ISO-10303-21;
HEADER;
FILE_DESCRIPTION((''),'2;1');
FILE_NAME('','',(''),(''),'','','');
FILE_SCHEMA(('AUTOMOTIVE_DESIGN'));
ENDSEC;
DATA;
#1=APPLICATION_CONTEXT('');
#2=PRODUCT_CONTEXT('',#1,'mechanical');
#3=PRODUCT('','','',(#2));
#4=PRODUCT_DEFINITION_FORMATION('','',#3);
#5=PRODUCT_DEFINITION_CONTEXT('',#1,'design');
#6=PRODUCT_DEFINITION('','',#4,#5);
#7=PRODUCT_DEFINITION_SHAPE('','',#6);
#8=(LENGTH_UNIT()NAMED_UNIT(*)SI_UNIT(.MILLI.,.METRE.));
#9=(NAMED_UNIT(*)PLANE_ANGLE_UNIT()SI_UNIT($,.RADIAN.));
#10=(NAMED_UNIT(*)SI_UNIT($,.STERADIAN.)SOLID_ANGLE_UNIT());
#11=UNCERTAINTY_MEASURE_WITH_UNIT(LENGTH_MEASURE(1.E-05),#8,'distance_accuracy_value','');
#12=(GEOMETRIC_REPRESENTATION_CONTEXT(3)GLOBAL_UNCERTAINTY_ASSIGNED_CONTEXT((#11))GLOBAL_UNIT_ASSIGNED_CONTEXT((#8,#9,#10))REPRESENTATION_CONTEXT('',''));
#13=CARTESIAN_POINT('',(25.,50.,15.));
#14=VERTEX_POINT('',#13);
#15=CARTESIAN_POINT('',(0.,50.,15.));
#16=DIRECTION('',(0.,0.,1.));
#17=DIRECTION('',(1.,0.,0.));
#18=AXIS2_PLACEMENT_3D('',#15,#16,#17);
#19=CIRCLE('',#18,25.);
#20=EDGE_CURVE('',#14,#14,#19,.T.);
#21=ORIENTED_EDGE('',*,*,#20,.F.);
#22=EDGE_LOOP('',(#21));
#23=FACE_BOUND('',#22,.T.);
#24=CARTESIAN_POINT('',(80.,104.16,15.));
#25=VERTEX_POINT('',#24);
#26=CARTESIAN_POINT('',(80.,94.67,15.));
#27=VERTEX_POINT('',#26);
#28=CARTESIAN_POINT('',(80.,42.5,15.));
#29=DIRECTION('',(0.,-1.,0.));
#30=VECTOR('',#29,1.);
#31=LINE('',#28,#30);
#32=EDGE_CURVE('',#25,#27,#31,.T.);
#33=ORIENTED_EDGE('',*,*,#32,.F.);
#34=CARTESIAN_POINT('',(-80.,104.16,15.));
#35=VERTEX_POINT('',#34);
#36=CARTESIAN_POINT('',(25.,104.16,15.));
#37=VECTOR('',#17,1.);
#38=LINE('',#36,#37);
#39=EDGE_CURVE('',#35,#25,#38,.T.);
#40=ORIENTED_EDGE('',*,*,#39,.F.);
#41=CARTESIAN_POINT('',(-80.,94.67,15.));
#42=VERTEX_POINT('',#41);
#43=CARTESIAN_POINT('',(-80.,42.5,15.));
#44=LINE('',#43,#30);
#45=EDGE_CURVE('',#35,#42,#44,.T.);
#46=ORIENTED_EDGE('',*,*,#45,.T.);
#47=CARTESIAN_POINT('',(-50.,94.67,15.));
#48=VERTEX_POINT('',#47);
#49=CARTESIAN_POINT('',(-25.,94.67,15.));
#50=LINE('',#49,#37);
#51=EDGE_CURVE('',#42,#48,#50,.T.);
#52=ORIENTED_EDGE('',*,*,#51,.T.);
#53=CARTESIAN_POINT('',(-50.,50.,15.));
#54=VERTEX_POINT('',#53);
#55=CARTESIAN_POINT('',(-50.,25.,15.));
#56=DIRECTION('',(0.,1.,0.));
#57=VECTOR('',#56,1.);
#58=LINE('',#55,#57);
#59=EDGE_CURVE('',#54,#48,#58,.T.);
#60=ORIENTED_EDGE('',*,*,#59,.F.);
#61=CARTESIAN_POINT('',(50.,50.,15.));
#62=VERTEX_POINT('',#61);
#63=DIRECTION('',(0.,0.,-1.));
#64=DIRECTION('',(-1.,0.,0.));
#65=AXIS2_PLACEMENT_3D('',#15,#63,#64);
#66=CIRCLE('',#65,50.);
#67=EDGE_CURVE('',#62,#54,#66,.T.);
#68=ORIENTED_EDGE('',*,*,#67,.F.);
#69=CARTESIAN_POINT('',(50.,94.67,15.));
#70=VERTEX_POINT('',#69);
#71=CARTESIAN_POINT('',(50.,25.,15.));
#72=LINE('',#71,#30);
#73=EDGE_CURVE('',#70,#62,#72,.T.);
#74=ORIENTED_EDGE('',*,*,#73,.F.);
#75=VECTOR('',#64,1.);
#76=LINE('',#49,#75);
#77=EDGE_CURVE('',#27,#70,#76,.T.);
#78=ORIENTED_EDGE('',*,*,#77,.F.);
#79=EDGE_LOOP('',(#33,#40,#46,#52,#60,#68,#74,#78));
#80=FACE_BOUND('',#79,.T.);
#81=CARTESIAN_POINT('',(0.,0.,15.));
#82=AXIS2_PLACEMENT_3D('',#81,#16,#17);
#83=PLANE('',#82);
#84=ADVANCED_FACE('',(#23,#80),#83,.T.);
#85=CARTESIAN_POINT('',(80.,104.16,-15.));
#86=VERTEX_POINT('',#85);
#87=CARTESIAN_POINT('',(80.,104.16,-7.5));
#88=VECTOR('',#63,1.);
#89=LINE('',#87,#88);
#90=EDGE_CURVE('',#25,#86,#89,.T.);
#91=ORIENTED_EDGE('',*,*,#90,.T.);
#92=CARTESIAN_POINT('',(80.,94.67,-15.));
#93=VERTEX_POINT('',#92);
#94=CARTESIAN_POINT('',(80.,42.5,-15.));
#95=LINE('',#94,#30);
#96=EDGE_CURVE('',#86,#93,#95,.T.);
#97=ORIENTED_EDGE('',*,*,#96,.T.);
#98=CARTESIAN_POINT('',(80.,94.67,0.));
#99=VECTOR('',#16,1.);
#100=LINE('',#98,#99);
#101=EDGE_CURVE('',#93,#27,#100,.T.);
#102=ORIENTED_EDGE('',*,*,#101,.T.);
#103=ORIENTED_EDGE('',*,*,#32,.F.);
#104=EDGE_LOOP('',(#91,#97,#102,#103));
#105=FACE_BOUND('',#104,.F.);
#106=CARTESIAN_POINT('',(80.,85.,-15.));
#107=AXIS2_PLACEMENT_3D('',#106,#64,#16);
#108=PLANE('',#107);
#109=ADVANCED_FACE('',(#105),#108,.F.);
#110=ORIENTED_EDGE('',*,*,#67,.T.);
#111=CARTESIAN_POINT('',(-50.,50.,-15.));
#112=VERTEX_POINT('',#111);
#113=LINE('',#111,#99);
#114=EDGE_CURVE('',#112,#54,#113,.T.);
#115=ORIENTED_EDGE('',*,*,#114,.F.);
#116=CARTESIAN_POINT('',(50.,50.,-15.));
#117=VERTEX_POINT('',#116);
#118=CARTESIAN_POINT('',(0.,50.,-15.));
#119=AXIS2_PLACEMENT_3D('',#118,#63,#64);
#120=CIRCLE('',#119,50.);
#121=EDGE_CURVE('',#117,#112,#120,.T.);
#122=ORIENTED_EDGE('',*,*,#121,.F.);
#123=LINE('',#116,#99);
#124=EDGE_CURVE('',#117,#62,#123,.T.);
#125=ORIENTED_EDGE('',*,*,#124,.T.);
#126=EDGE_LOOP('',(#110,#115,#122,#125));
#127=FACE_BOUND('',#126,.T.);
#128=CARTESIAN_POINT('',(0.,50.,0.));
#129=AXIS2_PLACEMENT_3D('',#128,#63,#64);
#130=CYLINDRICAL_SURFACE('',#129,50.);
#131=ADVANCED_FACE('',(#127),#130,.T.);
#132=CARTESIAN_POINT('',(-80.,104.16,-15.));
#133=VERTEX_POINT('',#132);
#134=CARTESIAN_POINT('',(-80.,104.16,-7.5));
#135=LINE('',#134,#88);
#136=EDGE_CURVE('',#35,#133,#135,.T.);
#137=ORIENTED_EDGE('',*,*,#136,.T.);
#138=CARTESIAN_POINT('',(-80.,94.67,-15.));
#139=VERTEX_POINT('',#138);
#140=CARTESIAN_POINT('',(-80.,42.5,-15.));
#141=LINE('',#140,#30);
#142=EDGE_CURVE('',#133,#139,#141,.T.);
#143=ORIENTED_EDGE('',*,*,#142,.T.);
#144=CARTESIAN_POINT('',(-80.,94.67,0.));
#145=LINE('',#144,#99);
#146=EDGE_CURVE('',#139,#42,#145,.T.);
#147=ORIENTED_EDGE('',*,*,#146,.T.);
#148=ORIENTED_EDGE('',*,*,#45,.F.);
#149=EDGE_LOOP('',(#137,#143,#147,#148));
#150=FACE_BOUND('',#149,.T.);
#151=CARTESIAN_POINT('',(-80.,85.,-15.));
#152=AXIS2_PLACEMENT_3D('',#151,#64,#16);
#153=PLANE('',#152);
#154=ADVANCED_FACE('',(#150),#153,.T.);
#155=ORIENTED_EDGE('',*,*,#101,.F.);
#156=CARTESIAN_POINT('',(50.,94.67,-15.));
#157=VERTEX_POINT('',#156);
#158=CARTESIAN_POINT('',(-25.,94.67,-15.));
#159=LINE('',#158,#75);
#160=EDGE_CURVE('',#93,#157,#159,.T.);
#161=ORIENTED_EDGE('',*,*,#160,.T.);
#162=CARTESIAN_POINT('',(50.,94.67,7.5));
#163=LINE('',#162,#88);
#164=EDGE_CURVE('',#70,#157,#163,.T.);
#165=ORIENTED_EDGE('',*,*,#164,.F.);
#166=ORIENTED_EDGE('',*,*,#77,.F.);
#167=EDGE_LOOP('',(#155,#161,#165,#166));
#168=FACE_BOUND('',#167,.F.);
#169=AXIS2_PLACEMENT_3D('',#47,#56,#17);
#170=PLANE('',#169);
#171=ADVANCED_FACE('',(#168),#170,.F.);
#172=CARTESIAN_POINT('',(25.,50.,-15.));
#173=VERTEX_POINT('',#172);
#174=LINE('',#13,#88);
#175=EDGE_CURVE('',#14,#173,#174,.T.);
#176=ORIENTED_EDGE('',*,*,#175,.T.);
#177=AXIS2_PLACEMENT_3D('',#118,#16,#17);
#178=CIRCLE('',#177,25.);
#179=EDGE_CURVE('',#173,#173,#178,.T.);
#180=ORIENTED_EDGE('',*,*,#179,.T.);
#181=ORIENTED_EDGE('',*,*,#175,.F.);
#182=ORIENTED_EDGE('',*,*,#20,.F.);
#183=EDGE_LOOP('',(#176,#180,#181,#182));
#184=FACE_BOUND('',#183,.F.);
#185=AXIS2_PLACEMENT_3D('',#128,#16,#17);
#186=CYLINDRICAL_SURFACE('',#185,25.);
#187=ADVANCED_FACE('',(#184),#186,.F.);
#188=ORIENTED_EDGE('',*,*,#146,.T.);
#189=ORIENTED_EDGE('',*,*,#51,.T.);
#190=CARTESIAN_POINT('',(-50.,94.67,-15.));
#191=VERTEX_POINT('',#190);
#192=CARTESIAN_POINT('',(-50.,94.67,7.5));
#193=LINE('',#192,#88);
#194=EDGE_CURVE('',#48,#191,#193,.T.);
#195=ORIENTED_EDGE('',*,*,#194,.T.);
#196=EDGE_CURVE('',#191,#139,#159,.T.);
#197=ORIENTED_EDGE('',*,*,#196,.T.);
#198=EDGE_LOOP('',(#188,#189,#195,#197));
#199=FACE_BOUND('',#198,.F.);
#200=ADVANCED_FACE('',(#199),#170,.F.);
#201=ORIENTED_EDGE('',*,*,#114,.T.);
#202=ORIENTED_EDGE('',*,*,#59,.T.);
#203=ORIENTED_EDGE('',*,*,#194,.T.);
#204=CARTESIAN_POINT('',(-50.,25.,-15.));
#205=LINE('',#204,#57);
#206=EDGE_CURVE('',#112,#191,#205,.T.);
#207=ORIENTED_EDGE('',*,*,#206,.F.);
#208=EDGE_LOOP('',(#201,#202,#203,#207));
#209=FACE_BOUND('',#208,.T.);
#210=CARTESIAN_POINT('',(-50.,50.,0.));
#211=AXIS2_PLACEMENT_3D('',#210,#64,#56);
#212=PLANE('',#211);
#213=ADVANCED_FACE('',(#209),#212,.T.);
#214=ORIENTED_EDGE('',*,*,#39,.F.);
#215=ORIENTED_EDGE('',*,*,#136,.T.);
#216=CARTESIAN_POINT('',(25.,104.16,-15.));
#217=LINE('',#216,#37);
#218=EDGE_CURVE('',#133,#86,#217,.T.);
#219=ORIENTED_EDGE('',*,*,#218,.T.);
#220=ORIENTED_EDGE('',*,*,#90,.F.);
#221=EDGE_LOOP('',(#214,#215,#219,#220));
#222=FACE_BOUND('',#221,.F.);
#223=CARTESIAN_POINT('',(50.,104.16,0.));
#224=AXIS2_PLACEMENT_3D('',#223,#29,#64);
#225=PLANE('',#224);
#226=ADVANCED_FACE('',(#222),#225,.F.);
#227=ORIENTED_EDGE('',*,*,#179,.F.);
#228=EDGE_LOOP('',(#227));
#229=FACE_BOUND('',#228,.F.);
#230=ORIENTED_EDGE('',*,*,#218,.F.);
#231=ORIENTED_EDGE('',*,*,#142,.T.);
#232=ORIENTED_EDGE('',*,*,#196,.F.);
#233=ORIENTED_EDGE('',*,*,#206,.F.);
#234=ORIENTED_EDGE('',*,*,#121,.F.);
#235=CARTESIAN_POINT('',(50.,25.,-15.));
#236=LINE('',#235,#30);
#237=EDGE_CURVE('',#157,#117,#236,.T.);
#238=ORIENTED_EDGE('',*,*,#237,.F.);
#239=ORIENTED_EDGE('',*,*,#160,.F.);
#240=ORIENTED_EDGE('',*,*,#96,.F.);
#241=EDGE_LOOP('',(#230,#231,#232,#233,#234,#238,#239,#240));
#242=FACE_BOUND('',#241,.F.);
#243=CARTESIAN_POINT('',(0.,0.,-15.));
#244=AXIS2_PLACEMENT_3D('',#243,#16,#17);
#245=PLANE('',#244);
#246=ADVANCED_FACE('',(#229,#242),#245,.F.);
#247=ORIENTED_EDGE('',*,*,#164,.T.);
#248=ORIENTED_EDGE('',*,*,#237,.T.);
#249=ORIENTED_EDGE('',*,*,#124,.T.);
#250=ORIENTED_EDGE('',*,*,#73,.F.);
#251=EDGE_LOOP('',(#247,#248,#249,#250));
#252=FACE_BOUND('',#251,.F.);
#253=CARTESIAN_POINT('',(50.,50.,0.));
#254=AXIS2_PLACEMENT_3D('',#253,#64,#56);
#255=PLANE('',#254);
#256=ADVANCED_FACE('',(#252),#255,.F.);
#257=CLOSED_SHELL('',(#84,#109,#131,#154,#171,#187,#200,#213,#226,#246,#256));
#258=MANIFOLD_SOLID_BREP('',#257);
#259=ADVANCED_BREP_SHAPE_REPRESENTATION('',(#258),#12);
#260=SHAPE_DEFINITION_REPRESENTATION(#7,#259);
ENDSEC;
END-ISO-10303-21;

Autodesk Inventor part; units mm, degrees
ref_plane "YZ Plane" through (0, 0, 0) normal (1, 0, 0) x (0, 1, 0)
ref_plane "XZ Plane" through (0, 0, 0) normal (0, 1, 0) x (-1, 0, 0)
ref_plane "XY Plane" through (0, 0, 0) normal (0, 0, 1) x (1, 0, 0)
sketch "Sketch1" plane through (0, 0, 0) normal (0, 0, 1) x (1, 0, 0)
  arc A0 (-50, 50) -> (0, 0) centre (0, 50) ccw
  line L0 (0, 0) -> (0, 52.848) construction
  line L1 (0, 0) -> (-10.7104, 0) construction
  arc A1 (0, 0) -> (50, 50) centre (0, 50) ccw
  circle A2 centre (0, 50) radius 25
  arc A3 (0, 25) -> (25, 50) centre (0, 50) ccw
  line L2 (-50, 50) -> (-50, 85)
  line L3 (50, 50) -> (50, 85)
  line L4 (50, 85) -> (-50, 85)
  dimension "d0" = 50
  dimension "d1" = 25
  dimension "d15" = 85
extrude "Extrusion1" add sketch "Sketch1" along normal mid plane 30
sketch "Sketch5" plane through (-50, 85, 15) normal (0, 1, 0) x (1, 0, 0)
  line L0 (100, 30) -> (100, 0) projected
  line L1 (100, 30) -> (130, 30)
  line L2 (130, 30) -> (130, 0)
  line L3 (130, 0) -> (100, 0)
  line L4 (100, 0) -> (100, 30)
  line L5 (0, 30) -> (0, 0) projected
  line L6 (0, 30) -> (-30, 30)
  line L7 (-30, 30) -> (-30, 0)
  line L8 (-30, 0) -> (0, 0)
  line L9 (0, 0) -> (0, 30)
  point P0 (50, 15)
  dimension "d16" = 30
  dimension "d17" = 30
  dimension "d18" = 30
  dimension "d19" = 30
extrude "Extrusion4" add sketch "Sketch5" against normal blind 6
move faces "Move1" translate (0, 25.99, 0) faces at (-26.6667, 85, -5)
move faces "Move2" translate (0, 22.5, 0) faces at (-70, 79, -5) (60, 79, -5)
move faces "Move3" translate (0, -6.83, 0) faces at (1.0045, 92.6059, 15) (1.0045, 92.6059, -15) (26.6667, 110.99, 5) (-80, 107.8267, -5) (80, 107.8267, 5) (60, 101.5, -5) (-70, 101.5, -5)
properties part number "wheel holder"
